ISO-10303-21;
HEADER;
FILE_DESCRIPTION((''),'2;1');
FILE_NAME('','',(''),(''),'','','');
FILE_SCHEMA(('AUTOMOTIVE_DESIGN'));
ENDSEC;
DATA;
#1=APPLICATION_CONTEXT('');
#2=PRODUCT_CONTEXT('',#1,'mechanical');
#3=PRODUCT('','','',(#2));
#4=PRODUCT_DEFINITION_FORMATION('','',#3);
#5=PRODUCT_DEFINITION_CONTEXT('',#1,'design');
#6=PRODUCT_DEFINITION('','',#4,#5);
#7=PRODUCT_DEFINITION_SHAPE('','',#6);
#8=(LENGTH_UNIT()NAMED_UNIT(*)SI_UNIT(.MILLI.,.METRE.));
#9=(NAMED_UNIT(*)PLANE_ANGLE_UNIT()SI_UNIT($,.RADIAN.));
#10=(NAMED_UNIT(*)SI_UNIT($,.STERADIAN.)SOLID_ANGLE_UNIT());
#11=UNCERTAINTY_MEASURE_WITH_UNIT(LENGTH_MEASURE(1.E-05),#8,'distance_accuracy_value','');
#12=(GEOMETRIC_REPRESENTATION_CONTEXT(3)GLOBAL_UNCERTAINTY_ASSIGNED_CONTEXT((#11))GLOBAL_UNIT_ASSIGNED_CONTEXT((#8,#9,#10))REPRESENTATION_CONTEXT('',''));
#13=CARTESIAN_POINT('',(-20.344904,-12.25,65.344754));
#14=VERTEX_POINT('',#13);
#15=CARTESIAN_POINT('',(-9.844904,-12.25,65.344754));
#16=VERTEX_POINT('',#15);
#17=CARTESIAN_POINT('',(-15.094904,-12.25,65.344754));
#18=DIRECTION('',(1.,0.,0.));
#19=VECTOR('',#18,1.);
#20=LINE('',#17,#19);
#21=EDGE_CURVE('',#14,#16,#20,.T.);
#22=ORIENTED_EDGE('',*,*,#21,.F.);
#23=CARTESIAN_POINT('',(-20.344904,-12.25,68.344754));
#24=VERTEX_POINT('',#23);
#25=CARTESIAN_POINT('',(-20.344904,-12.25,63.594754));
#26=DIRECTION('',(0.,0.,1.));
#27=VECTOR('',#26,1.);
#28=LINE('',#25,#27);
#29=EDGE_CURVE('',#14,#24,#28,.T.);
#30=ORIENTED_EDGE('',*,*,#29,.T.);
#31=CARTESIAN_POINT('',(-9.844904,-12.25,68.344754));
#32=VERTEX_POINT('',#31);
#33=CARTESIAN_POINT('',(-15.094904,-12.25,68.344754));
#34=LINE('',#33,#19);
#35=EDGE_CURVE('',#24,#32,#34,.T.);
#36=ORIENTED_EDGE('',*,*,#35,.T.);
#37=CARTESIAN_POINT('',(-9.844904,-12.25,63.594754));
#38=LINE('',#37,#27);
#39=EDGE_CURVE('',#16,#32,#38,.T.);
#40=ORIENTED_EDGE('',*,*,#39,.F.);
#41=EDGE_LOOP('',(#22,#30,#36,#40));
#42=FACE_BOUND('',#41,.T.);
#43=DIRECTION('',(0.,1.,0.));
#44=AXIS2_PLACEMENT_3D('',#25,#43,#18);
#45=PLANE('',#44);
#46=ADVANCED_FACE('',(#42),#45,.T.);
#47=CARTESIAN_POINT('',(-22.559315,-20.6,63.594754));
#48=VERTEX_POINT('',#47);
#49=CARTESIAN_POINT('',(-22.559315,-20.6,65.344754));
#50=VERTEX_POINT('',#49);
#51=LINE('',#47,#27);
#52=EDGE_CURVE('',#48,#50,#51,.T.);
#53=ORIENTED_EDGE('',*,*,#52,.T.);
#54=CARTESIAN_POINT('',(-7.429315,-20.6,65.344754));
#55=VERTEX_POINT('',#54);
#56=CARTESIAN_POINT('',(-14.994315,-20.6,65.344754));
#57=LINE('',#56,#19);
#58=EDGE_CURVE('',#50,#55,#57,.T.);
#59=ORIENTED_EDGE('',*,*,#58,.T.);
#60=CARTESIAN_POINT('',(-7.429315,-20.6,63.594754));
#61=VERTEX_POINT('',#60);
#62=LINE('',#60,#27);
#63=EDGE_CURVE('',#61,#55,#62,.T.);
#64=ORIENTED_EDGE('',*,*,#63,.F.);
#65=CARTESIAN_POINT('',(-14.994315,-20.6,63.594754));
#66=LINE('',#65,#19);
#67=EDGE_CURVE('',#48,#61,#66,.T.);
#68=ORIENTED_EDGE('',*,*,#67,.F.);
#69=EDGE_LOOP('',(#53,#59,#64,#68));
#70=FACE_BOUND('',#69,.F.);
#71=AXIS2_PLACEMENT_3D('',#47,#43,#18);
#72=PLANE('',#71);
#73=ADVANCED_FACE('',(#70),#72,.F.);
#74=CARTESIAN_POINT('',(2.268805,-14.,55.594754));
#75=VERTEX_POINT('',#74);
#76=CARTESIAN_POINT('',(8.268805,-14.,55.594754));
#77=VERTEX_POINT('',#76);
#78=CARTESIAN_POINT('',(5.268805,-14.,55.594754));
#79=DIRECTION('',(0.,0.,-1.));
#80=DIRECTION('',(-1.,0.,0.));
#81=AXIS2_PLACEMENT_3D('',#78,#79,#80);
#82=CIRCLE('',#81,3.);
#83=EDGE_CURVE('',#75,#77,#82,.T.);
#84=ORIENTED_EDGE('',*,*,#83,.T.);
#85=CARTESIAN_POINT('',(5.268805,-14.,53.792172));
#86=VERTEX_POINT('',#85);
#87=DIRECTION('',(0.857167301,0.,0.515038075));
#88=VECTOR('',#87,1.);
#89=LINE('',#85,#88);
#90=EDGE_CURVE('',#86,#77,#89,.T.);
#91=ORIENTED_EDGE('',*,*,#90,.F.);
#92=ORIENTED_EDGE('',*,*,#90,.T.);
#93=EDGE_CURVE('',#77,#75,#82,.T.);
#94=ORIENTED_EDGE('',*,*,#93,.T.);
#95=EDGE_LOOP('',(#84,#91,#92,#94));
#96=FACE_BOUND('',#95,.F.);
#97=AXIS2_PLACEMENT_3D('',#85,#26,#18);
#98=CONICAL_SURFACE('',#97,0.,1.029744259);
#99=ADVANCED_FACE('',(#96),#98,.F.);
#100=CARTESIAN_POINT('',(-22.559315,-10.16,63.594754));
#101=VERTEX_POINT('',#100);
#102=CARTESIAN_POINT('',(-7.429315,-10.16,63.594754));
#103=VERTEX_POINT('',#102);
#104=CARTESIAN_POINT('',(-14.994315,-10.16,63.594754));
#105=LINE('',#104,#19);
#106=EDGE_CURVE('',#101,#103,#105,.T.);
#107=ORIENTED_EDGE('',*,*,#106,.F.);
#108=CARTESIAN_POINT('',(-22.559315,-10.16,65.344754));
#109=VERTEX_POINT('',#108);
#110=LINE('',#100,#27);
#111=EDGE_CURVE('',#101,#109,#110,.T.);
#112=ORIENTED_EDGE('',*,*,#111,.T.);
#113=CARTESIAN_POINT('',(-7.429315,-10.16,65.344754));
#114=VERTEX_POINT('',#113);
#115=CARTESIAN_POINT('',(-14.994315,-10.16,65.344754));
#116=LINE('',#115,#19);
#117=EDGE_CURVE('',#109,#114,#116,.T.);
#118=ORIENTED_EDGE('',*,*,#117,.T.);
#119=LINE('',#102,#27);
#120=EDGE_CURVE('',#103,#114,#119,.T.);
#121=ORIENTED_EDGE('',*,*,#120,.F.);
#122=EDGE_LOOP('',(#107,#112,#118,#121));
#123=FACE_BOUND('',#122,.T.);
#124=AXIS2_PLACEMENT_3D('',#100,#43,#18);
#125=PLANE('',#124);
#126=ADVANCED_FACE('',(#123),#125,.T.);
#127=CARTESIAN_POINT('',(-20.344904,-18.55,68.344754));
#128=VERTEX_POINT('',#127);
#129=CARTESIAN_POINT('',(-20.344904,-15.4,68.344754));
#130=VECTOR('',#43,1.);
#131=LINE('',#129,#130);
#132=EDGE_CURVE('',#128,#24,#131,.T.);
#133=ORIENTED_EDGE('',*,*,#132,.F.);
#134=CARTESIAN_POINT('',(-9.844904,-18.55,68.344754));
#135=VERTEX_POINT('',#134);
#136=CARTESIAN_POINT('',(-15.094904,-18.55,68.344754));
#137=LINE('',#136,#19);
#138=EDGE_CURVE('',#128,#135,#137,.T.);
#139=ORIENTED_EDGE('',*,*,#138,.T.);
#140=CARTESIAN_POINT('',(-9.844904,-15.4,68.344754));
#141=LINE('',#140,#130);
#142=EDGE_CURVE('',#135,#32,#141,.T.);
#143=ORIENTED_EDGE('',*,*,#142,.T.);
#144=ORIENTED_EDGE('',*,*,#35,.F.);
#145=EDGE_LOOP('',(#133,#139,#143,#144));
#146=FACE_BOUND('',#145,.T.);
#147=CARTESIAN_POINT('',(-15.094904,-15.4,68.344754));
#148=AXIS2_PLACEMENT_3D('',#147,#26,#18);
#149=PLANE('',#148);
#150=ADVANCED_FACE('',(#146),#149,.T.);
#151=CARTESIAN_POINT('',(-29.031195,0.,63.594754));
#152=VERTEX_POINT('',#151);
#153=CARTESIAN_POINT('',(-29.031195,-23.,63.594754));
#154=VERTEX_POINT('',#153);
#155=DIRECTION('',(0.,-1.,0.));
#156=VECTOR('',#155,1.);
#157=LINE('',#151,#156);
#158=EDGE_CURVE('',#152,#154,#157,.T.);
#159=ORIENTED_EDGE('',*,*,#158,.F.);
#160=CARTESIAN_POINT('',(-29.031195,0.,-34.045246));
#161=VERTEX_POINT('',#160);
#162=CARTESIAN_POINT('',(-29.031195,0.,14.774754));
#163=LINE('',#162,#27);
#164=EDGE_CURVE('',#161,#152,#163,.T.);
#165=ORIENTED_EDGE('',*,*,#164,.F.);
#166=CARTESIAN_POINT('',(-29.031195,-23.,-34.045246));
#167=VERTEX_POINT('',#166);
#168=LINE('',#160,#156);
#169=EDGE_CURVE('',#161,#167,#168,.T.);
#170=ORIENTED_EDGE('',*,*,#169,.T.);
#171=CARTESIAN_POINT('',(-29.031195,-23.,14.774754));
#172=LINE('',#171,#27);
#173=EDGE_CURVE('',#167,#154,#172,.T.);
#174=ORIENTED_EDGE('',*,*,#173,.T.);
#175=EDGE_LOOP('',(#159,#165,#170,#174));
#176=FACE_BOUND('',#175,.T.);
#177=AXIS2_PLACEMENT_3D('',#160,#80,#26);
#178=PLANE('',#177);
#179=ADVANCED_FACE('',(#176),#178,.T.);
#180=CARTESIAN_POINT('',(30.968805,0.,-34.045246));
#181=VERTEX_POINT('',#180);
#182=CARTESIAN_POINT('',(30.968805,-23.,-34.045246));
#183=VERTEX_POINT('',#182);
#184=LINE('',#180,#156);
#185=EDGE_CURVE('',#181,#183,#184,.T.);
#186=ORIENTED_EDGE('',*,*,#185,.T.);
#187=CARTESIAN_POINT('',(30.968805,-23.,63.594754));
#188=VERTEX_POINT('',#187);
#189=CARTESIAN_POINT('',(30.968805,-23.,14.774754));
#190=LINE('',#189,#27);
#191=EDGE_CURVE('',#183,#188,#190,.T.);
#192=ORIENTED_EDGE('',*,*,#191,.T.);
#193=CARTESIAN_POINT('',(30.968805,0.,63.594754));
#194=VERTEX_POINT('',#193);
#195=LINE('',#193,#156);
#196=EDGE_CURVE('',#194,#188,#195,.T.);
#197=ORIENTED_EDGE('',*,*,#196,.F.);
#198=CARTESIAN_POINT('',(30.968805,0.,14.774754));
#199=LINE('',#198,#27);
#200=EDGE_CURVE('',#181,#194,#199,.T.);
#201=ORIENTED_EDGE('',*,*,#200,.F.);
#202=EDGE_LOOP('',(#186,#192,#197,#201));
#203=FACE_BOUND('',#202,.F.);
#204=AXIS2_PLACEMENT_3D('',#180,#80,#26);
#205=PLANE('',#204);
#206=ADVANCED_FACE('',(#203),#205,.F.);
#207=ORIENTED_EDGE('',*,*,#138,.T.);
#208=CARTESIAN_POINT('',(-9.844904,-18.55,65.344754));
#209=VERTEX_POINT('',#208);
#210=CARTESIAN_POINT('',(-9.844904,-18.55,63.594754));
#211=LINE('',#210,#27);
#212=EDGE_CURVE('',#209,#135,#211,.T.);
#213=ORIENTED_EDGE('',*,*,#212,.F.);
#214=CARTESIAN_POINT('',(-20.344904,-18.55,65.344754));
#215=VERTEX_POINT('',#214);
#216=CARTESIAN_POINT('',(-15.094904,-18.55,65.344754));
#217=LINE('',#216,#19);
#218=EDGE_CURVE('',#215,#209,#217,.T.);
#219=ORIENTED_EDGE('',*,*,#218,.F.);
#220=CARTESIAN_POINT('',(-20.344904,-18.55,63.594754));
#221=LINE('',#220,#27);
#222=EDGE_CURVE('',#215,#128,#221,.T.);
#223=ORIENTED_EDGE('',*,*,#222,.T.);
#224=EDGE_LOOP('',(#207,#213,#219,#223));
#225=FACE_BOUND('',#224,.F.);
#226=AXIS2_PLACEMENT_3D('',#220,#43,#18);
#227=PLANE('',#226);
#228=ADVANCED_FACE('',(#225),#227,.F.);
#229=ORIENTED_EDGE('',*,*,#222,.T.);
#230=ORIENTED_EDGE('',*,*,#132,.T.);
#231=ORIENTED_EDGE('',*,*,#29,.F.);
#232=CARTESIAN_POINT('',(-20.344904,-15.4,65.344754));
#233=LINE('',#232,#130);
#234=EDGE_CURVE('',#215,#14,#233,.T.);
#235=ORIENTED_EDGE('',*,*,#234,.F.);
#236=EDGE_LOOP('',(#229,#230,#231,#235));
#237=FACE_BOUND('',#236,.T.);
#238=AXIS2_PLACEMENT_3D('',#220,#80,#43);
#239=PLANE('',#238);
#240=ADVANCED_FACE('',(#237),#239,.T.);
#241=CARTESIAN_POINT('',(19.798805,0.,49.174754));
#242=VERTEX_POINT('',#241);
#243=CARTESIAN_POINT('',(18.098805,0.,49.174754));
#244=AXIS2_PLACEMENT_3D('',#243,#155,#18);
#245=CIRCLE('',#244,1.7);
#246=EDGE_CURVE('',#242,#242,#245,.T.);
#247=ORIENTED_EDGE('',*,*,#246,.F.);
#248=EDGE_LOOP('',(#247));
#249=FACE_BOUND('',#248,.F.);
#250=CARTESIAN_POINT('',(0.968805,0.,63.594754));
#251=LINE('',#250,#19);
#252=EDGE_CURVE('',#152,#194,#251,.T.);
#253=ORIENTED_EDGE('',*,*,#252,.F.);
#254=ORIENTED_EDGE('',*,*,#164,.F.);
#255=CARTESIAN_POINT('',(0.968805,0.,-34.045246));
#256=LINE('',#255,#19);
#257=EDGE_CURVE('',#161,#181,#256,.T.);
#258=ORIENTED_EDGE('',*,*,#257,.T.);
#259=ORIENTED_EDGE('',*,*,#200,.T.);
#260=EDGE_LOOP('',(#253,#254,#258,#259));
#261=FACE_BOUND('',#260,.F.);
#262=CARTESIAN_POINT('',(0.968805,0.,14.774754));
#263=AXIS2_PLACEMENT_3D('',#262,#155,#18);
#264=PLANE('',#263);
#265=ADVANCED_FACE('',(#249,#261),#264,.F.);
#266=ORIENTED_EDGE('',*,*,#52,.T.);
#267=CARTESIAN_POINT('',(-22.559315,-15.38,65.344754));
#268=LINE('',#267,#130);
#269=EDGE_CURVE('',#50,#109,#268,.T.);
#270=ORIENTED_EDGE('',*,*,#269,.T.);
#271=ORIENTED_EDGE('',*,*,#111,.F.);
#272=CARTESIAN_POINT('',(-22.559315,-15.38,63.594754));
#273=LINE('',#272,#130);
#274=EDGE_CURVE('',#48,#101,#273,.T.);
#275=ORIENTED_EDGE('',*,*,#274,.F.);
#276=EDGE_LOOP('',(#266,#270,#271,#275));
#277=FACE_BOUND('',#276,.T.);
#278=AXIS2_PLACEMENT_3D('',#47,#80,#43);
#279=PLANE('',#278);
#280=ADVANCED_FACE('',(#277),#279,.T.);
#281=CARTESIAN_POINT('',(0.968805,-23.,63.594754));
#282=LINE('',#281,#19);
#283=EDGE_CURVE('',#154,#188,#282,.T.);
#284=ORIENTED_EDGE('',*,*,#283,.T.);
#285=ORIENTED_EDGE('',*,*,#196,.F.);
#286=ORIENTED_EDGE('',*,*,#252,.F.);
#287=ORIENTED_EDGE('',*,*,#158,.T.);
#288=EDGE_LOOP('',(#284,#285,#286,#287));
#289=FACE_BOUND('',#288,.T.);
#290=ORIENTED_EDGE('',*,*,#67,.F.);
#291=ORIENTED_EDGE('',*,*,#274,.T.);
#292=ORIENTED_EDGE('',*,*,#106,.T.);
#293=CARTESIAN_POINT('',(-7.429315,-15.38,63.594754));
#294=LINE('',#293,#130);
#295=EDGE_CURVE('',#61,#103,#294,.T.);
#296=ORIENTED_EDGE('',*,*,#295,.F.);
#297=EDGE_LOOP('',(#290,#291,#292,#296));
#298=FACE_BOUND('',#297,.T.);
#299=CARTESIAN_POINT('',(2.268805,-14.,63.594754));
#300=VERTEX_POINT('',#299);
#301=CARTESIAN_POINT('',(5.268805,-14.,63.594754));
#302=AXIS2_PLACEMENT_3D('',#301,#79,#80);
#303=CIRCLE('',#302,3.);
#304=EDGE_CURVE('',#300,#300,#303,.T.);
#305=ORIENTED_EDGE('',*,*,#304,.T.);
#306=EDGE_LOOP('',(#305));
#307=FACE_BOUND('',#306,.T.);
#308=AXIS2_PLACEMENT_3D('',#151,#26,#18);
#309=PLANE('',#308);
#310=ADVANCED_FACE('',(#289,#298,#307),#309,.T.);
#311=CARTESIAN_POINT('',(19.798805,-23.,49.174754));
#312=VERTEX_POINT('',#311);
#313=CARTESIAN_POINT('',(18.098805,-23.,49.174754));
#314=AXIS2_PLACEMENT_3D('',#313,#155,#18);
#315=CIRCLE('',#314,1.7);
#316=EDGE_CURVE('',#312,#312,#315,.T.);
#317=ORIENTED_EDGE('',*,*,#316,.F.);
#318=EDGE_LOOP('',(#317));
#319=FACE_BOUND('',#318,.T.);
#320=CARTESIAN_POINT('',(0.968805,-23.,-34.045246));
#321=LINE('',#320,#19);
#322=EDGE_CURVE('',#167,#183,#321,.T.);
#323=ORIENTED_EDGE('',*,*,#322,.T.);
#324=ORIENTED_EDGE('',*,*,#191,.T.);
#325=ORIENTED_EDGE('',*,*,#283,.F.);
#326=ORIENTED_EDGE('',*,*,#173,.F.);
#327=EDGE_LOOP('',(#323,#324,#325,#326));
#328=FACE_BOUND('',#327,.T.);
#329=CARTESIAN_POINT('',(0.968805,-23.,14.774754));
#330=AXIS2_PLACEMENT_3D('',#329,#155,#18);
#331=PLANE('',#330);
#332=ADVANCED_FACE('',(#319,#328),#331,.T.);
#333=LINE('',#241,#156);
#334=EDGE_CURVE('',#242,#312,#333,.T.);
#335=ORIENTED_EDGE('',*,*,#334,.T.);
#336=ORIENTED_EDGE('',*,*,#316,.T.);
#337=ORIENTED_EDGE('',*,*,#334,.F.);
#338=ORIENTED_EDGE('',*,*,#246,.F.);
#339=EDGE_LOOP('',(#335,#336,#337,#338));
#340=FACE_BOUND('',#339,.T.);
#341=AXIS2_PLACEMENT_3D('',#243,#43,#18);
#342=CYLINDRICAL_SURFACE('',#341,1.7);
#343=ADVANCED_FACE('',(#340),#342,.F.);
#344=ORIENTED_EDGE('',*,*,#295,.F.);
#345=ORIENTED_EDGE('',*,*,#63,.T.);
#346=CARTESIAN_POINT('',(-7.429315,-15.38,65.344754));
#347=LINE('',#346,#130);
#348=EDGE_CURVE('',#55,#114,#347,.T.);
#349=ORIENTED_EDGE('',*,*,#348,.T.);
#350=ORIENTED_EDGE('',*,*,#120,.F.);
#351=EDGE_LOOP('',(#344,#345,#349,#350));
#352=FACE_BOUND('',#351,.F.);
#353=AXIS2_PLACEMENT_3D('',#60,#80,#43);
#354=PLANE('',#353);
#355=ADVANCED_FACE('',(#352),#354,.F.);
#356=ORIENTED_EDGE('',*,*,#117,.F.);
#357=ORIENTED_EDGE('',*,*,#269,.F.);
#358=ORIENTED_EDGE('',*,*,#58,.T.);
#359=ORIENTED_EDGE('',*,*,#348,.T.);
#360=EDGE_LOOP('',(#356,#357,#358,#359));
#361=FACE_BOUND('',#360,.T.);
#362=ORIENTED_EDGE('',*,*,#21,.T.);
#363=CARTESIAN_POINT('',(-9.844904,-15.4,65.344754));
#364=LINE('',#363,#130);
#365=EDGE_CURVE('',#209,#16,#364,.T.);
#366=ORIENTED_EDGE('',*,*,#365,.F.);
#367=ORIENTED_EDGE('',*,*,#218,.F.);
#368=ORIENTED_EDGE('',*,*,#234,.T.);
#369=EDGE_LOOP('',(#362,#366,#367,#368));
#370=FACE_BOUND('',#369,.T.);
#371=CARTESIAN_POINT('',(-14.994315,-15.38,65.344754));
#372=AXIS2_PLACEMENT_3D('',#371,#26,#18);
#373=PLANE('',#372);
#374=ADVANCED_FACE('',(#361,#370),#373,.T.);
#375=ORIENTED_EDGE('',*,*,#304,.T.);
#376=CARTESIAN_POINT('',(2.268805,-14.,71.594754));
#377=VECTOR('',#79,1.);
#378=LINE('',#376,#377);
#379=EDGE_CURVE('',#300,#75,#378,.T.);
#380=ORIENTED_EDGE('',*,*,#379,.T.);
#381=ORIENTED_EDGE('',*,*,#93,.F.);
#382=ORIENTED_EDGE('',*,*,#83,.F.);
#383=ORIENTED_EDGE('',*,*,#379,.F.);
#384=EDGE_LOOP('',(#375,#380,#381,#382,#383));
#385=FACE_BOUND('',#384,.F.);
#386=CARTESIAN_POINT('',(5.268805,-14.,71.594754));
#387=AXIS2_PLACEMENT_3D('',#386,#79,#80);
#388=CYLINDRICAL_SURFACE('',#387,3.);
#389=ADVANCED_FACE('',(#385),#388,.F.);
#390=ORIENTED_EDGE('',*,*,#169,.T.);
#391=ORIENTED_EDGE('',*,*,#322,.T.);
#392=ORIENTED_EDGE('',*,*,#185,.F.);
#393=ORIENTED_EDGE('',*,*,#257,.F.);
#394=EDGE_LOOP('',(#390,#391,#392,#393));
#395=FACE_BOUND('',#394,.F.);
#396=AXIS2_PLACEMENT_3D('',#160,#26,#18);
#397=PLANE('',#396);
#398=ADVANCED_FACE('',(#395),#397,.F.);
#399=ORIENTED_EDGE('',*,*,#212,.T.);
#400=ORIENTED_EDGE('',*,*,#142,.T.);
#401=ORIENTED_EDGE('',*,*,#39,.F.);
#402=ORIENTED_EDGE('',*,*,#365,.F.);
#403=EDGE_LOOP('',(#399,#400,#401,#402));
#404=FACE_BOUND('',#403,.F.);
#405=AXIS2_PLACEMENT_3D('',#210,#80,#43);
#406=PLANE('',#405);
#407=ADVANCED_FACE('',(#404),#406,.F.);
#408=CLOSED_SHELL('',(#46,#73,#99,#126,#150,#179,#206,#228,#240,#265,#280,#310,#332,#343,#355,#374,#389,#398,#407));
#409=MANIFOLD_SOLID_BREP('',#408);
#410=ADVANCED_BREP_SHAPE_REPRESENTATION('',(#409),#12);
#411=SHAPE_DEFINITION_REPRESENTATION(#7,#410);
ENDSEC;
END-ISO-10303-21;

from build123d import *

# Parameters (mm, degrees)
F0_W     = 60
F0_H     = 97.64
F0_R     = 1.7
F1_DEPTH = 23
F3_D     = 6
F3_DEPTH = 8
F3_TIP   = 1.8025818571
F2_W     = 10.5
F2_H     = 6.3
F4_DEPTH = 4.75
F2_W_2   = 15.13
F2_H_2   = 10.44
F5_DEPTH = 1.75


with BuildPart() as f1:
    # F0 (on Front) → F1 (new body)
    with BuildSketch(Plane.XZ):
        with Locations((0.968804583, 14.7747536898)):
            Rectangle(F0_W, F0_H)
        with Locations((18.098804583, 49.1747536898)):
            Circle(F0_R, mode=Mode.SUBTRACT)
    extrude(amount=F1_DEPTH)

    # F3
    with Locations(Plane.XY.offset(63.5947536898)):
        with Locations((5.268804583, -14)):
            Hole(F3_D / 2, depth=F3_DEPTH)
            with Locations((0, 0, -(F3_DEPTH + F3_TIP / 2))):  # 118° drill point
                Cone(0, F3_D / 2, F3_TIP, mode=Mode.SUBTRACT)

    # F2 (on face) → F4 (join)
    with BuildSketch(Plane.XY.offset(63.5947536898)):
        with Locations((-15.0949036926, -15.4)):
            Rectangle(F2_W, F2_H)
    extrude(amount=F4_DEPTH)

    # F2 (on face) → F5 (join)
    with BuildSketch(Plane.XY.offset(63.5947536898)):
        with Locations((-14.9943149662, -15.38)):
            Rectangle(F2_W_2, F2_H_2)
        with Locations((-15.0949036926, -15.4)):
            Rectangle(F2_W, F2_H, mode=Mode.SUBTRACT)
    extrude(amount=F5_DEPTH)


solid = f1.part
